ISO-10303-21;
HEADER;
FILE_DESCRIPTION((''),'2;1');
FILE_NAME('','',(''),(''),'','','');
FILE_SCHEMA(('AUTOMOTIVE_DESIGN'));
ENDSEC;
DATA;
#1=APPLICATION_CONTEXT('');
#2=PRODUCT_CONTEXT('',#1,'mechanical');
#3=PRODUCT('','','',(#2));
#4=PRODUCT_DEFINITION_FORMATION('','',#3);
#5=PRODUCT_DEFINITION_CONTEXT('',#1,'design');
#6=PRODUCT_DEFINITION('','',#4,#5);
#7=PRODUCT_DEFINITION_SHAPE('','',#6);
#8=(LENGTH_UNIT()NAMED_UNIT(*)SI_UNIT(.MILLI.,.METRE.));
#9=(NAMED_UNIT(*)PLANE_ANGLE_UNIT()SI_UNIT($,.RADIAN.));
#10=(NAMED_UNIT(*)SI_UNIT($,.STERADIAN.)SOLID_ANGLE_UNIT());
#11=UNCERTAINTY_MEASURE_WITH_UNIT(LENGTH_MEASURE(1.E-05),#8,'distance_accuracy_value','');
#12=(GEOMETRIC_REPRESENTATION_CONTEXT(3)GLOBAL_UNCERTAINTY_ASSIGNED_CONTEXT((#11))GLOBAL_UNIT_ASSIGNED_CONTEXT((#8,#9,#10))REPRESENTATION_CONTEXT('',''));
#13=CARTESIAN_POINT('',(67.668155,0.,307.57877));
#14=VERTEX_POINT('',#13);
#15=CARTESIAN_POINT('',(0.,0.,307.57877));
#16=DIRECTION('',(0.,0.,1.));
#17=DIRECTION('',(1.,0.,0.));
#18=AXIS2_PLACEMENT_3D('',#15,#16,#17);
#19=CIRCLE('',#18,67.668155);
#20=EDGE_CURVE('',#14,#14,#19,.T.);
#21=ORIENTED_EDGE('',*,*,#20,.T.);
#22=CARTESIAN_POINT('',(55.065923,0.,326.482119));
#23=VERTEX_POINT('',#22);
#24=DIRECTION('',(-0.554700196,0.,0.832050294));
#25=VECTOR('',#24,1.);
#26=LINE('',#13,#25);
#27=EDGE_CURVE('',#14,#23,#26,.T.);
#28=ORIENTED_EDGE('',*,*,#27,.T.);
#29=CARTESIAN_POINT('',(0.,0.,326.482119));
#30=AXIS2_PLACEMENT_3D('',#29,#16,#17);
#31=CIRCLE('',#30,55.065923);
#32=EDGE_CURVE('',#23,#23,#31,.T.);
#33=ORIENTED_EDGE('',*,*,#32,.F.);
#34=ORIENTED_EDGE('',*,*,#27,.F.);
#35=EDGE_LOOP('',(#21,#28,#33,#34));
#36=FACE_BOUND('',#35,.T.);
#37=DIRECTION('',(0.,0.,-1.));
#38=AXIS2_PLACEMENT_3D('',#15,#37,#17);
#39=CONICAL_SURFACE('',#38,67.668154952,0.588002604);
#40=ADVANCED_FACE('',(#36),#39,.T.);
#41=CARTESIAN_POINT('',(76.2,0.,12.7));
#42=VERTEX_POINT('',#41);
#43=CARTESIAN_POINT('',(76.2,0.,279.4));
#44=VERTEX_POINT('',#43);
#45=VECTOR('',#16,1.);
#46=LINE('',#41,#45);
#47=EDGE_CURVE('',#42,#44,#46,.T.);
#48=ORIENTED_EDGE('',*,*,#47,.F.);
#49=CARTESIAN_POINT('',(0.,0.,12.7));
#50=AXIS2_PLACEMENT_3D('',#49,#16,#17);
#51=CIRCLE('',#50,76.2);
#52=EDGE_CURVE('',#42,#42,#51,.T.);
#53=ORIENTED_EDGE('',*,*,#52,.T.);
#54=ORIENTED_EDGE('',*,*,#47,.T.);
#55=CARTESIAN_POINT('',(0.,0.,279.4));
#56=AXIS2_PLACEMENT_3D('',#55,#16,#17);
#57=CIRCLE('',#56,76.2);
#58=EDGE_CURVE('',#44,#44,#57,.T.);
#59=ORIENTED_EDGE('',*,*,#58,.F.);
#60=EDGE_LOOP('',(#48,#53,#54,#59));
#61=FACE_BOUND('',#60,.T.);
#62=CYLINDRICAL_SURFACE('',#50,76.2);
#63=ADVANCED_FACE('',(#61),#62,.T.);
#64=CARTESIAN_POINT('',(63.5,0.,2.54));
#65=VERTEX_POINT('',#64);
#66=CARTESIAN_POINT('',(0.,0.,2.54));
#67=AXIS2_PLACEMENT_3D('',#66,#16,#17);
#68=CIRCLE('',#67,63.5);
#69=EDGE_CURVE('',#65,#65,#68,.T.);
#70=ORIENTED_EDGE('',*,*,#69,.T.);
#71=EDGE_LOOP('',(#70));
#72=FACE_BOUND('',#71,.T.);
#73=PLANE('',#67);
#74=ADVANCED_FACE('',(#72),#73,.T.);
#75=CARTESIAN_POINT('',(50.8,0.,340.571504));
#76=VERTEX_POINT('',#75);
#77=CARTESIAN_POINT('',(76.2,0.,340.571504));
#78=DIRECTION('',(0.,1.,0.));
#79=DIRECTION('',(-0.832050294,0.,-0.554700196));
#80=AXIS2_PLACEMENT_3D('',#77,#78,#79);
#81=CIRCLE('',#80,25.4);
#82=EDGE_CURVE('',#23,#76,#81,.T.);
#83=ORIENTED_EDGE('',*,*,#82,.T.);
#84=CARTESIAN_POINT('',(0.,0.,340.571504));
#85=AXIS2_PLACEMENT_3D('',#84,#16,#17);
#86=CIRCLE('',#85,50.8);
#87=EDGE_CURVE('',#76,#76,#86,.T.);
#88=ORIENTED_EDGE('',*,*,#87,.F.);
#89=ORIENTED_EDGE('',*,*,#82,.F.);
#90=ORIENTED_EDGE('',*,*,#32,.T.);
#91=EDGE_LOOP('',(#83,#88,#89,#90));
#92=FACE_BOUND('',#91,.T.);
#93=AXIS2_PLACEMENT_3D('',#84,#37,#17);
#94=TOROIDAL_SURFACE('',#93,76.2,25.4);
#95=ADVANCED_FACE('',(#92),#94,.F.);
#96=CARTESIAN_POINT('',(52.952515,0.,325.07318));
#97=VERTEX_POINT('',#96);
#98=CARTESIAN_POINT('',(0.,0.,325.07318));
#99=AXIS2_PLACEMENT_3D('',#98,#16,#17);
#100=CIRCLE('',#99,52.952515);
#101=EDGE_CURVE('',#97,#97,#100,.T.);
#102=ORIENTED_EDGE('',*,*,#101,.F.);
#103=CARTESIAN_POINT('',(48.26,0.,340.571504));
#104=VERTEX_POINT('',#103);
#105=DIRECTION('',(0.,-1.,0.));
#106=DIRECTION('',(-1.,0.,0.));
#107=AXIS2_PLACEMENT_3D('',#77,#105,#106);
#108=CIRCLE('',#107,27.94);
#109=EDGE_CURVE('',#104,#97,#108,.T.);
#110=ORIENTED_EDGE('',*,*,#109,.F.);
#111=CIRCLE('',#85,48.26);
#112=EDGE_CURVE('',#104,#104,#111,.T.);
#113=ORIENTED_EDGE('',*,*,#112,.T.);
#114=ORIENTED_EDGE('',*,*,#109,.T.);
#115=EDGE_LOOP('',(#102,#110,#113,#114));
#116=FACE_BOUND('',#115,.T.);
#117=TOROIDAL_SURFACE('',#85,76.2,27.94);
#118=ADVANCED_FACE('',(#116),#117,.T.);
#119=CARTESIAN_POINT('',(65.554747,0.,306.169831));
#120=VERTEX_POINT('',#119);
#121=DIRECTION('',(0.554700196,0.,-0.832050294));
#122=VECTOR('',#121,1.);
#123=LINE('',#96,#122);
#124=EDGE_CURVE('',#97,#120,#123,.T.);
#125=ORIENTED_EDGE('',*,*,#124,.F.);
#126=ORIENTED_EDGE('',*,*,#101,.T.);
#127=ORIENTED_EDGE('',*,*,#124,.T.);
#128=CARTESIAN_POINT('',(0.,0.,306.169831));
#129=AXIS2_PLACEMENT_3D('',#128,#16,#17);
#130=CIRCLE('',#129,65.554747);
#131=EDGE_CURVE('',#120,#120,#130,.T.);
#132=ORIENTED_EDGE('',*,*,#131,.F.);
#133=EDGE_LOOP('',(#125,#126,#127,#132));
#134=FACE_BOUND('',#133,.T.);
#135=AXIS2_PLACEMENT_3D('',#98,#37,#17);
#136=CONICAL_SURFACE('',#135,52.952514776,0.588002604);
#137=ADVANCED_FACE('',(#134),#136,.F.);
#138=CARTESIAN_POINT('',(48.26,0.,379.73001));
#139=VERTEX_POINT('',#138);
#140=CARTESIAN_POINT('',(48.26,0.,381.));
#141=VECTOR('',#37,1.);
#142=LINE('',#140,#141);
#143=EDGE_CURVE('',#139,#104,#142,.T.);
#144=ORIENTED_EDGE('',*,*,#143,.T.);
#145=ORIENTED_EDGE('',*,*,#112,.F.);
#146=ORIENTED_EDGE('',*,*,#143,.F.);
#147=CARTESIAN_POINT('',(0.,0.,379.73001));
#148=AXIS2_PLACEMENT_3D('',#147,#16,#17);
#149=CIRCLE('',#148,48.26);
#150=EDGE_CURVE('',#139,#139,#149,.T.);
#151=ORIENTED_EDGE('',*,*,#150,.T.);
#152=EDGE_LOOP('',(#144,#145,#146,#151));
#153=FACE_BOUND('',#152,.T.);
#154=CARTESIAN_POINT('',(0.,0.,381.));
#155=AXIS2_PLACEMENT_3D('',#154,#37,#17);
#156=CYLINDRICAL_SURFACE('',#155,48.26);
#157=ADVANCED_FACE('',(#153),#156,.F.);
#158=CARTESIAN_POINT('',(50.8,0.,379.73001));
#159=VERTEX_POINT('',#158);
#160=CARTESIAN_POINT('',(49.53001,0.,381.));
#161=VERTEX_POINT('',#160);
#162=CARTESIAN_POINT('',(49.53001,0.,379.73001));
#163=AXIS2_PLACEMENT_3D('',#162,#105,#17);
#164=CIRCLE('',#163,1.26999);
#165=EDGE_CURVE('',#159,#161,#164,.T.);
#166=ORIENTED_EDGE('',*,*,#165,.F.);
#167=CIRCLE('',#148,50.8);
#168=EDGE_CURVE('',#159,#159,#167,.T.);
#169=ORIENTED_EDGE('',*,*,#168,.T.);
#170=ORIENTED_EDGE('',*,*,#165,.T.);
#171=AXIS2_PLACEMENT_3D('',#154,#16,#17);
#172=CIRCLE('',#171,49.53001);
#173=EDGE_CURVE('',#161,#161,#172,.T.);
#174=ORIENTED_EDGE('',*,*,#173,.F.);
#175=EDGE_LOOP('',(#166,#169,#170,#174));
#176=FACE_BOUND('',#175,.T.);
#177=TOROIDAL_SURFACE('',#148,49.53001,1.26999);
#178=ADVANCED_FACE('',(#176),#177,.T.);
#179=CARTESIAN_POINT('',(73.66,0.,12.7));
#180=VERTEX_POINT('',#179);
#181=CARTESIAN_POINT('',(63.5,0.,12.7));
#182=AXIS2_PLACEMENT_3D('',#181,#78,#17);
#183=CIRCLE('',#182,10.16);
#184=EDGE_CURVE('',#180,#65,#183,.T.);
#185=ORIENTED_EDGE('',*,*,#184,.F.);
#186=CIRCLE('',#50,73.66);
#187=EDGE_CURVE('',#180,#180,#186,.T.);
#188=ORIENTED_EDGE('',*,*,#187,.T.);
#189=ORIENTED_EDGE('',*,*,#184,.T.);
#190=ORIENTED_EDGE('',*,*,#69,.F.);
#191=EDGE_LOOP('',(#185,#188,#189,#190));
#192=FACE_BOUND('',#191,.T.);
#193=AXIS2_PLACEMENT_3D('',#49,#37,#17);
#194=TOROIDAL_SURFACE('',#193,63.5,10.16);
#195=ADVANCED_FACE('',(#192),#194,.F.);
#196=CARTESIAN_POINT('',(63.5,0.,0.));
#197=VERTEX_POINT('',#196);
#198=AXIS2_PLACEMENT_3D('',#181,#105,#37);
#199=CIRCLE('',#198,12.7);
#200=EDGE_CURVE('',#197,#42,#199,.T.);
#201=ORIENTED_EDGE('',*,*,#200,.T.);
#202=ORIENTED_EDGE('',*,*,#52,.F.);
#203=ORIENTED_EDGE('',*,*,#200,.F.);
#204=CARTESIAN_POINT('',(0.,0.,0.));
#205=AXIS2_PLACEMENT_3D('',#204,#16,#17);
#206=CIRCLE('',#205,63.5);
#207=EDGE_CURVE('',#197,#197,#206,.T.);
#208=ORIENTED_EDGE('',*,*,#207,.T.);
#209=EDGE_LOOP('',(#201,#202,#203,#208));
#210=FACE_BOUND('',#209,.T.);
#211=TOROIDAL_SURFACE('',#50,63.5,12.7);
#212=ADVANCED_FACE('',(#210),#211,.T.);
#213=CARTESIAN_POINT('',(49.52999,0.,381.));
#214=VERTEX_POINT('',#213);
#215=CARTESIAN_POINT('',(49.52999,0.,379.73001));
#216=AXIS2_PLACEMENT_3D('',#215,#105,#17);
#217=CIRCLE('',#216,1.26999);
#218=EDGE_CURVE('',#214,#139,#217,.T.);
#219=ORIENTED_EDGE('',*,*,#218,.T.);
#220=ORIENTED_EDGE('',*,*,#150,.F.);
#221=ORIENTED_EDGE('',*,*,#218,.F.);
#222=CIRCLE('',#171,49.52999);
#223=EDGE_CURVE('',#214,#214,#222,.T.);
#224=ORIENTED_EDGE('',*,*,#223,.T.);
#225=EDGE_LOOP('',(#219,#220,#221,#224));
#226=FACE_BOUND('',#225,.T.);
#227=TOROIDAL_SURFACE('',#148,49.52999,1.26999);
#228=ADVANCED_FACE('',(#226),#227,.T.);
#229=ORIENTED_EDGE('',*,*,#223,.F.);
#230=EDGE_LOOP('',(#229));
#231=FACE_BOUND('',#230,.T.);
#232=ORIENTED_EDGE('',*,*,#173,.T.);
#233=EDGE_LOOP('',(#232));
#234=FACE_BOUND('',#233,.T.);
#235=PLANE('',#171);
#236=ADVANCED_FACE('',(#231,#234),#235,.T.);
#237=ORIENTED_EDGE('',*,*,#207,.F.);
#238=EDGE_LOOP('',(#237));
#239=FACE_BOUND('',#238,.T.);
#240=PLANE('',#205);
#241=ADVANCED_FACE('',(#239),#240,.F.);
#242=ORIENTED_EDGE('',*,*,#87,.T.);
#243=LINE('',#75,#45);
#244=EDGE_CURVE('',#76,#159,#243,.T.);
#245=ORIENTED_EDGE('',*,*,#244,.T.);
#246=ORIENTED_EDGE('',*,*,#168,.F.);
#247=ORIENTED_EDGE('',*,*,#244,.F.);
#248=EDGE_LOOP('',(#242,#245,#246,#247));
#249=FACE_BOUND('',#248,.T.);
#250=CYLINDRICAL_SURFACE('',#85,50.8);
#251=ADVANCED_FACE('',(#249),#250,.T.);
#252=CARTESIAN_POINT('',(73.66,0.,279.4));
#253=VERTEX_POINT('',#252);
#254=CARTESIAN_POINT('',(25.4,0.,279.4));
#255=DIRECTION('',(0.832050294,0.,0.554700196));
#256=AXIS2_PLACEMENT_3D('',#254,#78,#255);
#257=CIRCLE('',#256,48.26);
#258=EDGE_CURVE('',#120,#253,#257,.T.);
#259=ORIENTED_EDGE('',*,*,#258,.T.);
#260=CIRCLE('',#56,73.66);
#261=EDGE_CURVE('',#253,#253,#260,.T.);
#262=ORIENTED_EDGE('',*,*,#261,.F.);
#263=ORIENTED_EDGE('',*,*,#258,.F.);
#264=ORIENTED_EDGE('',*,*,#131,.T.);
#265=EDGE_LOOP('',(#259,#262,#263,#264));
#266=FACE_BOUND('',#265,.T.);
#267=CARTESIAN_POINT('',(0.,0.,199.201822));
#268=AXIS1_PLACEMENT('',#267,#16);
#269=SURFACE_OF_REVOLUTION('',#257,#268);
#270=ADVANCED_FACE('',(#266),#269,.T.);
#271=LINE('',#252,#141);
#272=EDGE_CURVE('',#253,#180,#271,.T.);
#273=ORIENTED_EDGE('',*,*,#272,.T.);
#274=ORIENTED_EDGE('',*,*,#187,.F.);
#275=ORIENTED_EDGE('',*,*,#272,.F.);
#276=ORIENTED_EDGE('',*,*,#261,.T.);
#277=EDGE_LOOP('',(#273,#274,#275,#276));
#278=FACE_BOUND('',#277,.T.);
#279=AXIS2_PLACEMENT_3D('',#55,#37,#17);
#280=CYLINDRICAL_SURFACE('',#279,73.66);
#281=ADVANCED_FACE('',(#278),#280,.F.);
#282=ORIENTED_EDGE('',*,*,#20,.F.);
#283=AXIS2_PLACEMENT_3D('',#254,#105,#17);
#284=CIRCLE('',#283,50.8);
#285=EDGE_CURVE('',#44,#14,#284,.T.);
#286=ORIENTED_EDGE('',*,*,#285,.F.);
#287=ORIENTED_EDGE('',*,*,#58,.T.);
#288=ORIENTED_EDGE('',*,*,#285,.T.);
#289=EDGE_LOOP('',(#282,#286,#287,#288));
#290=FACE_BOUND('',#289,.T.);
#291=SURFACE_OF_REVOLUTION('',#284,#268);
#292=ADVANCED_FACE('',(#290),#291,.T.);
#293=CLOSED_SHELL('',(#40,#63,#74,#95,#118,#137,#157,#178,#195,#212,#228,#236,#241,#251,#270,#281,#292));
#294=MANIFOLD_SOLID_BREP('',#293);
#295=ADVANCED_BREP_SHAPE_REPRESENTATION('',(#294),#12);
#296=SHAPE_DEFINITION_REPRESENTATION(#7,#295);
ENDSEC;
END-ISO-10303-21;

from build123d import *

# Parameters (mm, degrees)
F2_R = 1.26999


# Not quite as in the source:
# - a fillet or chamfer is up to 0.001 mm smaller than in the source, because OpenCascade refuses the exact size


with BuildPart() as f1:
    # F0 (on Front) → F1 (revolve)
    with BuildSketch(Plane.XZ):
        with BuildLine():
            Line((76.2, 12.7), (76.2, 279.4))
            ThreePointArc((76.2, 279.4), (74.0202749456, 294.1210347534), (67.6681549524, 307.5787699682))
            Line((67.6681549524, 307.5787699682), (55.0659225238, 326.4821186111))
            ThreePointArc((55.0659225238, 326.4821186111), (51.8898625272, 333.2109862185), (50.8, 340.5715035952))
            Line((50.8, 340.5715035952), (50.8, 381))
            Line((50.8, 381), (48.26, 381))
            Line((48.26, 381), (48.26, 340.5715035952))
            ThreePointArc((48.26, 340.5715035952), (49.4588487799, 332.4749344808), (52.9525147762, 325.0731801126))
            Line((52.9525147762, 325.0731801126), (65.5547472047, 306.1698314698))
            ThreePointArc((65.5547472047, 306.1698314698), (71.5892611984, 293.3849830157), (73.66, 279.4))
            Line((73.66, 279.4), (73.66, 12.7))
            ThreePointArc((73.66, 12.7), (70.6842048969, 5.5157951031), (63.5, 2.54))
            Line((63.5, 2.54), (0, 2.54))
            Line((0, 2.54), (0, 0))
            Line((0, 0), (63.5, 0))
            ThreePointArc((63.5, 0), (72.4802561211, 3.7197438789), (76.2, 12.7))
        make_face()
    revolve(axis=Axis((0, 0, 199.2018222809), (0, 0, 1)))

    # F2 (radius 1.27 in the source; OpenCascade refuses exactly that, so slightly less here)
    f2_edges = [f1.edges().sort_by_distance(p)[0] for p in [
        (-50.8, 0, 381),
        (-48.26, 0, 381),
    ]]
    fillet(f2_edges, radius=F2_R)


solid = f1.part
